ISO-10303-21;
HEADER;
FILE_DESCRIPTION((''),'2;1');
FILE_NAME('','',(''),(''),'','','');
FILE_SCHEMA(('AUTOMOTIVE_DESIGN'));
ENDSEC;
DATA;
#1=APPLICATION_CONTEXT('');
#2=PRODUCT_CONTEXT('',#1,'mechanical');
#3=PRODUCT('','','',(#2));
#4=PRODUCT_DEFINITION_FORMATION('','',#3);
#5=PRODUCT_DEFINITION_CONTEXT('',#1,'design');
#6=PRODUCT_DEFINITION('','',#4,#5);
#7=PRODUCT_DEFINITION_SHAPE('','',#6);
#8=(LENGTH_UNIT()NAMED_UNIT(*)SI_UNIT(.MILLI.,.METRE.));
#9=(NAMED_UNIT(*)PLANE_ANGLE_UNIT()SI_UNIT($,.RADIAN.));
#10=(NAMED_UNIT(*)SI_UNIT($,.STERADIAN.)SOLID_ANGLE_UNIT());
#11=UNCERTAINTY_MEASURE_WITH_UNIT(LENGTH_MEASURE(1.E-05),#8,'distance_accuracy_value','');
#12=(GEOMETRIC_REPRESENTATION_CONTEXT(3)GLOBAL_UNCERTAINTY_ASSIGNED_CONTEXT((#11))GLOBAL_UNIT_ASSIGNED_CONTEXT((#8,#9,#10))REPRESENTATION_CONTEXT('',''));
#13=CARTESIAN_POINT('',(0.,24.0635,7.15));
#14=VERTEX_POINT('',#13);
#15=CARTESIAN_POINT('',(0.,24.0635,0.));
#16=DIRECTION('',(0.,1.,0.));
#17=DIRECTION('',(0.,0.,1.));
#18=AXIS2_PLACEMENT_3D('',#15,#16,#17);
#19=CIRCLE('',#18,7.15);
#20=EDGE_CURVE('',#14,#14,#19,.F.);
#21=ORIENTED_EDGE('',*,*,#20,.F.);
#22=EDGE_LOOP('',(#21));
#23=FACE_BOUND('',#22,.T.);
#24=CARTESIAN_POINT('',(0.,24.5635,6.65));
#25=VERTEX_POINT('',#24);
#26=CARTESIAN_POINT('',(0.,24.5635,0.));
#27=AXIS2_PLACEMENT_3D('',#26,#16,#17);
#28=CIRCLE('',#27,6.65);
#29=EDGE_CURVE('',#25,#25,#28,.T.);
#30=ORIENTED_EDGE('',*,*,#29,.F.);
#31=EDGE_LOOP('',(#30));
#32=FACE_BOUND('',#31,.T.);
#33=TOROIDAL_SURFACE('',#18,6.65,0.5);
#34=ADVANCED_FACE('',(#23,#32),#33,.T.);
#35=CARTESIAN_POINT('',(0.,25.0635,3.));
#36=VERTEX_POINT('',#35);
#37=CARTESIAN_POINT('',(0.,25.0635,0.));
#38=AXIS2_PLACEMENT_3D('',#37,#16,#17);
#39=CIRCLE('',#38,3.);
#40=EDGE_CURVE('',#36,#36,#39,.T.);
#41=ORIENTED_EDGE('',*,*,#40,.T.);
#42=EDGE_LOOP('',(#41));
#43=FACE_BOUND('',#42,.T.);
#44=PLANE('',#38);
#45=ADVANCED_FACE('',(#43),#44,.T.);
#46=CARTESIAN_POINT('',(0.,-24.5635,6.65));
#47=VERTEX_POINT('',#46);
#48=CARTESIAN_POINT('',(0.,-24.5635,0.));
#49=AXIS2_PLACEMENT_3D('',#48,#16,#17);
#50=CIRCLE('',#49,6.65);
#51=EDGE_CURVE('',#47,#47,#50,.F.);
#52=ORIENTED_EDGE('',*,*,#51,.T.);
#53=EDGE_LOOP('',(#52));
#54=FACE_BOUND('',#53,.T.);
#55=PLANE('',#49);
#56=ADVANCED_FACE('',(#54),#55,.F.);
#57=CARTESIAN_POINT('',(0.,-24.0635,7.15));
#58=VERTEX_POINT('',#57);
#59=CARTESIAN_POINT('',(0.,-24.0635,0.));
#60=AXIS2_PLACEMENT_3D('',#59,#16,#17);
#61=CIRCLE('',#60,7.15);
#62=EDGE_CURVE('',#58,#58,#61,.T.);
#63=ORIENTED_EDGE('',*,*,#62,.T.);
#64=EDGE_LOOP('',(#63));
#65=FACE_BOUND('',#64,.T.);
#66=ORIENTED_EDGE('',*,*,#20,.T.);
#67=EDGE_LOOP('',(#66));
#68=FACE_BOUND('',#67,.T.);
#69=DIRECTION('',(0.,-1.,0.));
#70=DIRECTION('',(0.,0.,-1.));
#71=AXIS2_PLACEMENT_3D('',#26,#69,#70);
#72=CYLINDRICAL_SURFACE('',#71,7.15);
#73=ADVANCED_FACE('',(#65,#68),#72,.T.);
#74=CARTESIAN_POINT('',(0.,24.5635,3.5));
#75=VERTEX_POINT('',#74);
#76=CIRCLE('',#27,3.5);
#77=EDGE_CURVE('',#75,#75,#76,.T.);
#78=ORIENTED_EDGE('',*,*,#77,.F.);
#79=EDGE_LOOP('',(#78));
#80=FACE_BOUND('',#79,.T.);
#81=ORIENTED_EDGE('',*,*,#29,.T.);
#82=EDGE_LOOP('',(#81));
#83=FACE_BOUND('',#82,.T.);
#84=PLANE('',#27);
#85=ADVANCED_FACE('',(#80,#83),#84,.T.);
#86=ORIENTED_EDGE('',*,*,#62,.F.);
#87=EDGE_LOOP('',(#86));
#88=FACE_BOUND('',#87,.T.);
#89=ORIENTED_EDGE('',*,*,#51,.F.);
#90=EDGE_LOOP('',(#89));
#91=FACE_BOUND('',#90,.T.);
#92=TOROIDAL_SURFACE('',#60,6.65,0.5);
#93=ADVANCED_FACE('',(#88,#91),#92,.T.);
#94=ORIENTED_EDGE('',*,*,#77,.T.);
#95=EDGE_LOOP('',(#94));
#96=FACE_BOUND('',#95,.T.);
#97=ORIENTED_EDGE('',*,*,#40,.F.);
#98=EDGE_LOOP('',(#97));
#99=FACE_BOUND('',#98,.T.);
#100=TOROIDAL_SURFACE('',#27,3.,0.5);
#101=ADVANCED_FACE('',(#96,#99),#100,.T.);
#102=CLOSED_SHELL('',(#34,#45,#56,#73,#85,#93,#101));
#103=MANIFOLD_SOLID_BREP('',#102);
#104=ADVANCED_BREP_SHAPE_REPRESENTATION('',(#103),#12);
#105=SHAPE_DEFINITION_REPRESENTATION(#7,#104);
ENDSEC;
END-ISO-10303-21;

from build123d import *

# Parameters (mm, degrees)
SKETCH1_R           = 7.15
BOSS_EXTRUDE1_DEPTH = 24.5635
SKETCH2_R           = 3.5
BOSS_EXTRUDE2_DEPTH = 0.5
FILLET1_R           = 0.5


with BuildPart() as part:
    # Sketch1 → Boss-Extrude1 (new, symmetric)
    with BuildSketch(Plane(origin=(0, 0, 0), x_dir=(1, 0, 0), z_dir=(0, 1, 0))):
        with Locations(Location((0, 0, 0), (0, 0, 270))):
            Circle(SKETCH1_R)
    extrude(amount=BOSS_EXTRUDE1_DEPTH, both=True)

    # Sketch2 → Boss-Extrude2 (add)
    with BuildSketch(Plane(origin=(0, 24.5635, 0), x_dir=(1, 0, 0), z_dir=(0, 1, 0))):
        with Locations(Location((0, 0, 0), (0, 0, 270))):
            Circle(SKETCH2_R)
    extrude(amount=BOSS_EXTRUDE2_DEPTH)

    # Fillet1
    fillet1_edges = [part.edges().sort_by_distance(p)[0] for p in [
        (0, -24.5635, -7.15),
        (0, 24.5635, -7.15),
        (0, 25.0635, -3.5),
    ]]
    fillet(fillet1_edges, radius=FILLET1_R - 0.0001)  # a hair under: the kernel refuses the full size


solid = part.part
